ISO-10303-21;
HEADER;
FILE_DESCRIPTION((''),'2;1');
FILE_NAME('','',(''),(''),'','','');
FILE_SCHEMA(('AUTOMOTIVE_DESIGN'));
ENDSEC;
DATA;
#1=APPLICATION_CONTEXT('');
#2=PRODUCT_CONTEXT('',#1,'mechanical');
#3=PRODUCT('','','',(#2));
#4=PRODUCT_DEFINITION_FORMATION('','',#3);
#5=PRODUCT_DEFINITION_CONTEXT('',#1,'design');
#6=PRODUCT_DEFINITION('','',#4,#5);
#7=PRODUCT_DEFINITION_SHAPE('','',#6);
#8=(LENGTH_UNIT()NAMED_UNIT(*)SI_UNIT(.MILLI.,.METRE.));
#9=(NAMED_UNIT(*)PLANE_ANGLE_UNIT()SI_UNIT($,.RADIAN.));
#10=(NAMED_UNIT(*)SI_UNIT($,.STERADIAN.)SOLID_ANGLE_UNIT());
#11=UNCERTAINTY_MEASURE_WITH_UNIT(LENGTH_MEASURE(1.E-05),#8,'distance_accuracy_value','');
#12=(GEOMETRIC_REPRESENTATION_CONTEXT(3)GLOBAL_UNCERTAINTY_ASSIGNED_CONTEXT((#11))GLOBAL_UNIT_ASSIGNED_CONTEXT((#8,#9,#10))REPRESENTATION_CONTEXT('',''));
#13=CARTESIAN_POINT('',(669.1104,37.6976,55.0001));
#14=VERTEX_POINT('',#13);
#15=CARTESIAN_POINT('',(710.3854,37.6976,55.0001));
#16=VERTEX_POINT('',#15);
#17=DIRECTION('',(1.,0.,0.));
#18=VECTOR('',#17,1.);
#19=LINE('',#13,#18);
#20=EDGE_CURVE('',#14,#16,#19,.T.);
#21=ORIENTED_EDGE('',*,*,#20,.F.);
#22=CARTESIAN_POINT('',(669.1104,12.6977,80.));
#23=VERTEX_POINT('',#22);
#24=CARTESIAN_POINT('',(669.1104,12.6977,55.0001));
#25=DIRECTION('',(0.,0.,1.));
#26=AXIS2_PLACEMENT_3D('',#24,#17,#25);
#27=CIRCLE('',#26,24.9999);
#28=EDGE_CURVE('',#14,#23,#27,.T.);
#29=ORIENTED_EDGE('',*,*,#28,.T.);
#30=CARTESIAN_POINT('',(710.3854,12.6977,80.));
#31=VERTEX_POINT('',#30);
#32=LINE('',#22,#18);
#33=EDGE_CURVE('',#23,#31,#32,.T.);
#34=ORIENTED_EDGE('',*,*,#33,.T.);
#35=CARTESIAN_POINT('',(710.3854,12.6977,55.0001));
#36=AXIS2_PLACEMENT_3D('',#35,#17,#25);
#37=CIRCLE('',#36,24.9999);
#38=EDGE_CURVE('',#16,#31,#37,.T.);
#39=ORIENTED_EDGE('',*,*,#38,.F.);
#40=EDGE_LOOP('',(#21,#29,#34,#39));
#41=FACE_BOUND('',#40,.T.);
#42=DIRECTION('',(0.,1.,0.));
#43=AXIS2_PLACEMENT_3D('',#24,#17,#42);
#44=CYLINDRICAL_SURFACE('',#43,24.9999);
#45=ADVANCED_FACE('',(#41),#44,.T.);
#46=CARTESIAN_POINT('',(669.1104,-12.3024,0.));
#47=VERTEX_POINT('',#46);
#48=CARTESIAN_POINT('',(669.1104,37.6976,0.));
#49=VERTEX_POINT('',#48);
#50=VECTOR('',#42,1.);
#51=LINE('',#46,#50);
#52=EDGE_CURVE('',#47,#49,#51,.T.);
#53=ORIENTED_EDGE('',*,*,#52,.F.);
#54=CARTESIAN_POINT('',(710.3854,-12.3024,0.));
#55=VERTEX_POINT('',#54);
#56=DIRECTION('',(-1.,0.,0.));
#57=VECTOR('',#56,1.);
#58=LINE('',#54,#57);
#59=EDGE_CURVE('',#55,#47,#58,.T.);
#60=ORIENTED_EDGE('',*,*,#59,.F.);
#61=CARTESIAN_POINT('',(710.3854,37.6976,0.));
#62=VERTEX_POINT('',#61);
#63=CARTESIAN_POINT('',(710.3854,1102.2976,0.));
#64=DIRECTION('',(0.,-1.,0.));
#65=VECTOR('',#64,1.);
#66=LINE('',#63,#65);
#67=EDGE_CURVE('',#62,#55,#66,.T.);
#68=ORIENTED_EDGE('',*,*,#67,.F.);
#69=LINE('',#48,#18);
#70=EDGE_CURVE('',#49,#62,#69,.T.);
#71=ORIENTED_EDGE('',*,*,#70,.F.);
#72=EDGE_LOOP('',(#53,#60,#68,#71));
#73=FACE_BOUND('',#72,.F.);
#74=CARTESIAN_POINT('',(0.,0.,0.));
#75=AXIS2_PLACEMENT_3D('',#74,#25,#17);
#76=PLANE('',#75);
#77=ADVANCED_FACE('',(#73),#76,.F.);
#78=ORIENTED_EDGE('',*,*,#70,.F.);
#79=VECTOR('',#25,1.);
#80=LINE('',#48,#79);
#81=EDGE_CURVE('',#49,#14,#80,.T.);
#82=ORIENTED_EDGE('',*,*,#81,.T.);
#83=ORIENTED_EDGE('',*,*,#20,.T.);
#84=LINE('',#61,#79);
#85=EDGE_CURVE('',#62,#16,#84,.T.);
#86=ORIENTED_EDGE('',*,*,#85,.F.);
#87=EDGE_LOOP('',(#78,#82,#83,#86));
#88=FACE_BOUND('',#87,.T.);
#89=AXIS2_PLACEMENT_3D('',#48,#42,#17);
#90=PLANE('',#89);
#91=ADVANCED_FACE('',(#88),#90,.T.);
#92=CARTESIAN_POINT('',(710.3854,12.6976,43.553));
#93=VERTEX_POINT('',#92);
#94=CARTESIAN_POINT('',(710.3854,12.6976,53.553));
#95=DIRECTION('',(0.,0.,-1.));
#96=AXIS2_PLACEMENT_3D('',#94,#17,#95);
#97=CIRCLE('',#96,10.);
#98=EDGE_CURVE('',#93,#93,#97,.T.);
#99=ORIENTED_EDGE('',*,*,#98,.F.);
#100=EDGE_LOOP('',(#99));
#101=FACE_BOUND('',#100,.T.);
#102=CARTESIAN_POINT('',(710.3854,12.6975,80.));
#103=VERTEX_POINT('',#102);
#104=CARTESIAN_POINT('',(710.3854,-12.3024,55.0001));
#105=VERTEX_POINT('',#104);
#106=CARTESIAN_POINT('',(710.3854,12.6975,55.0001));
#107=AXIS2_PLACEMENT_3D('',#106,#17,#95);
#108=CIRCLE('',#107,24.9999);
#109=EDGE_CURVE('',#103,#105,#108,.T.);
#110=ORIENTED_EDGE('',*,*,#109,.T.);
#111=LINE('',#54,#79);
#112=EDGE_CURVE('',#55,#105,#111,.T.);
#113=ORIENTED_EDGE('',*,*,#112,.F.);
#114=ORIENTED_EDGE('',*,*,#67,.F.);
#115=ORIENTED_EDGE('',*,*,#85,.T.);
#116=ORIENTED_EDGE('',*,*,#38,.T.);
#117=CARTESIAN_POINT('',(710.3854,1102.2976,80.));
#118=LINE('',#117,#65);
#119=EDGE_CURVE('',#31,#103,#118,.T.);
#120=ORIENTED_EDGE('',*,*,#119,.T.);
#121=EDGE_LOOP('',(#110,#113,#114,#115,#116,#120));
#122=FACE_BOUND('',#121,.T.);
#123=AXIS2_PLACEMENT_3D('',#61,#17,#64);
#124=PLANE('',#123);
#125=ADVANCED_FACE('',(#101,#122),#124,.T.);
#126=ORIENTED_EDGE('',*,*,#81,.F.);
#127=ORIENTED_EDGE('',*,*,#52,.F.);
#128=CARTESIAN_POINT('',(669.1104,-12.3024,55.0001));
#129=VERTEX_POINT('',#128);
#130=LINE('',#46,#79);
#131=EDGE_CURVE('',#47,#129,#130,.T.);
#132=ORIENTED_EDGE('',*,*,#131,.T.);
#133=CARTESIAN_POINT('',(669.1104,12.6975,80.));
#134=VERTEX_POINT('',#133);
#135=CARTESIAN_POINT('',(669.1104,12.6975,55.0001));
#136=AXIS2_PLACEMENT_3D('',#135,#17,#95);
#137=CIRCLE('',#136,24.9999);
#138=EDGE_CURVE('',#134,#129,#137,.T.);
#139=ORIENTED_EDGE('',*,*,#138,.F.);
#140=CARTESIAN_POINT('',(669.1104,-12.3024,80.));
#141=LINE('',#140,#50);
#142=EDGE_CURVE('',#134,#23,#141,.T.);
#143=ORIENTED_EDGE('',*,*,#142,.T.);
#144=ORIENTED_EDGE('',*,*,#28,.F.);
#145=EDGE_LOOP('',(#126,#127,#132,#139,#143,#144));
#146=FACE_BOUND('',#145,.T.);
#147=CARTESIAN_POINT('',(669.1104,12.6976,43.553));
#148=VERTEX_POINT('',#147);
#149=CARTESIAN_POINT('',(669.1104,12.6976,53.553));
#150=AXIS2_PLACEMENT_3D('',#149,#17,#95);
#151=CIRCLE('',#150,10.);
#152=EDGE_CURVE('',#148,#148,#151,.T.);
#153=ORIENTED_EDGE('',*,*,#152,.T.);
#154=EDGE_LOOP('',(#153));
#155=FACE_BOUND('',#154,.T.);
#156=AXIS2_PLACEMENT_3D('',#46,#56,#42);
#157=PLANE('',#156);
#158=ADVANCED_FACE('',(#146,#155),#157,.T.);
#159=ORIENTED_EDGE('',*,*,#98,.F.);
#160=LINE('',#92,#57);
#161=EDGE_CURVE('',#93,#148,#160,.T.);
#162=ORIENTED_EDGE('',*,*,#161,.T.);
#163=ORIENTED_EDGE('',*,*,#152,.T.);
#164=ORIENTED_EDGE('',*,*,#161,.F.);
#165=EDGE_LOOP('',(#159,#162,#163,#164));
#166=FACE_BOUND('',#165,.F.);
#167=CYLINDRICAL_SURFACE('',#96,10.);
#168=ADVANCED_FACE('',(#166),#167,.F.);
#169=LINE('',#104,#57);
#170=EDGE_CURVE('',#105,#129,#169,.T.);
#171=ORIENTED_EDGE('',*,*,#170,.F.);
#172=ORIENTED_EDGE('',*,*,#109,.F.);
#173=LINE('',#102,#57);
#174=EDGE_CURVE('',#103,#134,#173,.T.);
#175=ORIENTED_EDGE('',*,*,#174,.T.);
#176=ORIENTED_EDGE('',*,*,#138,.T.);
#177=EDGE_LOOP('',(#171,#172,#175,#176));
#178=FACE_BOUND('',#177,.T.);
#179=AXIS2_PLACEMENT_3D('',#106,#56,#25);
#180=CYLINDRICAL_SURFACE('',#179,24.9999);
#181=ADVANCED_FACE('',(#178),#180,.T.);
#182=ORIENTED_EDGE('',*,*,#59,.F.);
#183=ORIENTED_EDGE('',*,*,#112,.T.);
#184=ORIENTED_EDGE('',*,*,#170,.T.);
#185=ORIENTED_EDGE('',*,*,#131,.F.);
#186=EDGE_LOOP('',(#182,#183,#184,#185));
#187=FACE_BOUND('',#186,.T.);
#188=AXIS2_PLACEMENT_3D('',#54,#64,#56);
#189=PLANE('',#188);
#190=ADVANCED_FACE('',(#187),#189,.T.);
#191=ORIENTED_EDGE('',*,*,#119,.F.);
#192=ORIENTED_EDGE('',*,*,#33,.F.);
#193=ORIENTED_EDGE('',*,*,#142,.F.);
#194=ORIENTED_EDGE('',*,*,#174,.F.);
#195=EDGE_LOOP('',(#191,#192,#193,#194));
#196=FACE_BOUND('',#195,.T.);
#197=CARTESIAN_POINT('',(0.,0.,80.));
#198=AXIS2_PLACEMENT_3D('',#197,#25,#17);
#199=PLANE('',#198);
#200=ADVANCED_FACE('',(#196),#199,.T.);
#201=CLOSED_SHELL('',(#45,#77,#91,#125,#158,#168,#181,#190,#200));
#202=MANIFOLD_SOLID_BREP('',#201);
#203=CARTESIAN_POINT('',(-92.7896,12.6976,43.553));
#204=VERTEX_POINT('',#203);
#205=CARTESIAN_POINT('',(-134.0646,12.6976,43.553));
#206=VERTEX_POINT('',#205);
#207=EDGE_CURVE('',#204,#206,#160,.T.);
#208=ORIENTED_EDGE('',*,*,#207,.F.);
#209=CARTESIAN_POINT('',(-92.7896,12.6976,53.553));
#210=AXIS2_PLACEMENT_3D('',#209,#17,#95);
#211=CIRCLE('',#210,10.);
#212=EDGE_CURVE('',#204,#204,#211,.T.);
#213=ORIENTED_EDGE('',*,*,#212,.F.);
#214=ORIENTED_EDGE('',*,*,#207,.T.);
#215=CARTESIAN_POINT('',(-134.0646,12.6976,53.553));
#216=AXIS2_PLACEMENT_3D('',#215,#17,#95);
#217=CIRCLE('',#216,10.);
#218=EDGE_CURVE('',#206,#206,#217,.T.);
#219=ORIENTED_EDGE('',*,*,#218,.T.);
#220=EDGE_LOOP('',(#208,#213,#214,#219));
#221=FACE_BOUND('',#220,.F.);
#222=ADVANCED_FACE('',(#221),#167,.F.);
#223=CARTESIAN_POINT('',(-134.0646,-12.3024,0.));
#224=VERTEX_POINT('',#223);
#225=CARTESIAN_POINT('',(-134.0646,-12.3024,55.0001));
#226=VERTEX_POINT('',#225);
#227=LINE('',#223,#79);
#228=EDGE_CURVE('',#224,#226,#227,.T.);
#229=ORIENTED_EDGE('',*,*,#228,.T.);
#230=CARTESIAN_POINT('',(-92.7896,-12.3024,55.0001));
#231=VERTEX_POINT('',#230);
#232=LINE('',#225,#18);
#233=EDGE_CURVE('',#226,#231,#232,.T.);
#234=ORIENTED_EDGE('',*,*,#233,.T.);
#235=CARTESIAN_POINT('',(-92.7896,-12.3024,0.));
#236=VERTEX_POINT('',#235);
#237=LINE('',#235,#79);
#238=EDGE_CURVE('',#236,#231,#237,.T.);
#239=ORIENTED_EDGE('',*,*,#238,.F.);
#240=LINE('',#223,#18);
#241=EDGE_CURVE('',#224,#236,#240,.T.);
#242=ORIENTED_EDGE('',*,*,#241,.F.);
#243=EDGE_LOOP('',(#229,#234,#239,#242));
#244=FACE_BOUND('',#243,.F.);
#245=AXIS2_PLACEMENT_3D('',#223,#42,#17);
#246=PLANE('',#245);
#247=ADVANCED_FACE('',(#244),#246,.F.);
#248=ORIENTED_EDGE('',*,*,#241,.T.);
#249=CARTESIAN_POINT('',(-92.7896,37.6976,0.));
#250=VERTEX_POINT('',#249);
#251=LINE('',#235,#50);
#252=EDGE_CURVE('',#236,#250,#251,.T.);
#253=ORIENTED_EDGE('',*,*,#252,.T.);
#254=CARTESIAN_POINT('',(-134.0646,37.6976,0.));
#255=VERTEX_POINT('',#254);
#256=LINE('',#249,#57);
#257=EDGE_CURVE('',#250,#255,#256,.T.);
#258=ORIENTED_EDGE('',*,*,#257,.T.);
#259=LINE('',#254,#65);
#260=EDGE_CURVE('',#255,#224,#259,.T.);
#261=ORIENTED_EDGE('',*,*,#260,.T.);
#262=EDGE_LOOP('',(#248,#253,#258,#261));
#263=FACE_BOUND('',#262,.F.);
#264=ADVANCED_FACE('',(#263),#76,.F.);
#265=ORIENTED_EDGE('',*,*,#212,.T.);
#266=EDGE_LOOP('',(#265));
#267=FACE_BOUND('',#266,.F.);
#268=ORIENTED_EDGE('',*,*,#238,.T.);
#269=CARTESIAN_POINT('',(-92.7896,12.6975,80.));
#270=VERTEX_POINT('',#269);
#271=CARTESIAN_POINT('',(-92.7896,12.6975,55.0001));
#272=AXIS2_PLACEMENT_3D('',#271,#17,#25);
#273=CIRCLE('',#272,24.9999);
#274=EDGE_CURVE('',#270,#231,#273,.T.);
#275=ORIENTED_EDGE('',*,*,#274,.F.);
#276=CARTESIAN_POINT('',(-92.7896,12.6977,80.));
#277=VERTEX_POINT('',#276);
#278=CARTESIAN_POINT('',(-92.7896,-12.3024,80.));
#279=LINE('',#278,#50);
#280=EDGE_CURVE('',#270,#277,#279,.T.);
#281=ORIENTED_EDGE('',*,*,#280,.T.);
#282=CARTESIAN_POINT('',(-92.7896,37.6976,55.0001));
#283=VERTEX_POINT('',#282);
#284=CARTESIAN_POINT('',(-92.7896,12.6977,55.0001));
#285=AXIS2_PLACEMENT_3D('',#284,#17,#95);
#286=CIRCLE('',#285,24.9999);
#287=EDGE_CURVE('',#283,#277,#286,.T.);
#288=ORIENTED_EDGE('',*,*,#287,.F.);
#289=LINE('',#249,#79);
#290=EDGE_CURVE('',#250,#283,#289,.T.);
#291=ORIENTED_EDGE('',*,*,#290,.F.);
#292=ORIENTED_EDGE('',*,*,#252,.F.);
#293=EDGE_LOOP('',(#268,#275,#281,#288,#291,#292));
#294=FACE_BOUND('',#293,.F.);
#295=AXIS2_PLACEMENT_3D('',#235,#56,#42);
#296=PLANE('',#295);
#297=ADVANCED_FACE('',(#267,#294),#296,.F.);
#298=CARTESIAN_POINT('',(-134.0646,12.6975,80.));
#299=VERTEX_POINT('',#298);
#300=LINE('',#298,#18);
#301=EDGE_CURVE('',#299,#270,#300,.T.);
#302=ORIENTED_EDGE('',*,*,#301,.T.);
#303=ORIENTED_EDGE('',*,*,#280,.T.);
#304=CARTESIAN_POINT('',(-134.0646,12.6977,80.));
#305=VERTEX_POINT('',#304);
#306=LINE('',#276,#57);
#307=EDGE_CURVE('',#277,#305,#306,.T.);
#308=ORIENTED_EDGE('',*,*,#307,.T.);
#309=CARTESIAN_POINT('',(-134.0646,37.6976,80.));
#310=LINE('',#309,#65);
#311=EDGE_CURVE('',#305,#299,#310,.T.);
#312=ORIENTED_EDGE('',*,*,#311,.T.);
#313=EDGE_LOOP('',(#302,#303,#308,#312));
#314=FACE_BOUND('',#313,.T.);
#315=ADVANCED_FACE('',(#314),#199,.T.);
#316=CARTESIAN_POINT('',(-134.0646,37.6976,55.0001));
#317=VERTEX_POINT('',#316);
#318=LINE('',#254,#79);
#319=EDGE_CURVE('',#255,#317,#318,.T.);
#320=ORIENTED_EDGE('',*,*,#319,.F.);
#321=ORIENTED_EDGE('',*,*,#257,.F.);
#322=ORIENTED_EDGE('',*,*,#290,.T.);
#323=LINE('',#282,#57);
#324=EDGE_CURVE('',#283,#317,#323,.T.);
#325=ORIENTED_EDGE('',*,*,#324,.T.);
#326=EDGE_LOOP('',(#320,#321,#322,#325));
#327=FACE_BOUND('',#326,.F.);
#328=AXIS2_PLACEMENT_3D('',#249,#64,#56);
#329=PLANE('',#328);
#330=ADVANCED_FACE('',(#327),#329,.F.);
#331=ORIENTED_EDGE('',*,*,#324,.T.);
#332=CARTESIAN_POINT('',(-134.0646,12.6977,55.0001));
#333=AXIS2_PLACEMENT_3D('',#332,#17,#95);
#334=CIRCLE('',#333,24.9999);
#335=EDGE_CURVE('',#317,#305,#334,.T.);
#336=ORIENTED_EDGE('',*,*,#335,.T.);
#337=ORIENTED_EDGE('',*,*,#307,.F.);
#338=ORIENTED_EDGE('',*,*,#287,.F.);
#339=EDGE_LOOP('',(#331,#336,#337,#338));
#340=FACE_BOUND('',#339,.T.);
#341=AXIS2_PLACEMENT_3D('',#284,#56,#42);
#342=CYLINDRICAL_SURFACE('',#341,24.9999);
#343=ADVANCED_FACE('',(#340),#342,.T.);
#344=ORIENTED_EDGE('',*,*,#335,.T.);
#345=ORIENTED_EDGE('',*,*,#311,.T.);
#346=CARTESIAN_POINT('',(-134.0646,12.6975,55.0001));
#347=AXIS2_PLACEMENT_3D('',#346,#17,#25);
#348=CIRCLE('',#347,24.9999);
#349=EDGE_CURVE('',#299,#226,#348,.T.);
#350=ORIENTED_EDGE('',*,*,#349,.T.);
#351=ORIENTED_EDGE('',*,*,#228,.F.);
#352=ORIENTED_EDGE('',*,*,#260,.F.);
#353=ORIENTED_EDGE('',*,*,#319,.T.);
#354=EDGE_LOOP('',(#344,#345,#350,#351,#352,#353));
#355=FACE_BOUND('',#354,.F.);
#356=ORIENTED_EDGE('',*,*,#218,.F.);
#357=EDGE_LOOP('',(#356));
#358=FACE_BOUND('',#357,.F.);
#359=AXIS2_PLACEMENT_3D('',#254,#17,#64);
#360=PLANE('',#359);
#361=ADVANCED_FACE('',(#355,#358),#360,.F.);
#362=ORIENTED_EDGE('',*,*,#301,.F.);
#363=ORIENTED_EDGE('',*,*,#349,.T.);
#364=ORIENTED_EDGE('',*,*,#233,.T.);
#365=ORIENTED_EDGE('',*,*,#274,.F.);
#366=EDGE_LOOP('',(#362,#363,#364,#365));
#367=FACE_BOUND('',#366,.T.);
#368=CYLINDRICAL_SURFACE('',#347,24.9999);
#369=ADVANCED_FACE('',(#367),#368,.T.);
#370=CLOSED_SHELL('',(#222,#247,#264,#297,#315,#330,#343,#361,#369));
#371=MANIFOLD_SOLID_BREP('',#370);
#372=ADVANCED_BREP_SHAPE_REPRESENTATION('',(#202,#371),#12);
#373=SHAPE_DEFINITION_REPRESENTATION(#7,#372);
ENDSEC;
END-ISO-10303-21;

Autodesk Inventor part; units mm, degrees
ref_plane "YZ Plane" through (0, 0, 0) normal (1, 0, 0) x (0, 1, 0)
ref_plane "XZ Plane" through (0, 0, 0) normal (0, 1, 0) x (-1, 0, 0)
ref_plane "XY Plane" through (0, 0, 0) normal (0, 0, 1) x (1, 0, 0)
ref_plane "Work Plane1" through (0, 0, 0) normal (0, 0, 1) x (1, 0, 0)
sketch "Sketch1" plane through (0, 0, 0) normal (0, 0, 1) x (1, 0, 0)
  line L0 (-134.0646, -12.3024) -> (-92.7896, -12.3024)
  line L1 (-92.7896, -12.3024) -> (-92.7896, 37.6976)
  line L2 (-92.7896, 37.6976) -> (-134.0646, 37.6976)
  line L3 (-134.0646, 37.6976) -> (-134.0646, -12.3024)
  line L4 (710.3854, 1102.2976) -> (710.3854, -142.1524) projected
  line L5 (707.2104, -138.9774) -> (-130.8896, -138.9774) projected
  line L6 (288.1604, -138.9774) -> (288.1604, 728.5141) construction
  line L7 (710.3854, -12.3024) -> (669.1104, -12.3024)
  line L8 (669.1104, -12.3024) -> (669.1104, 37.6976)
  line L9 (669.1104, 37.6976) -> (710.3854, 37.6976)
  line L10 (710.3854, 37.6976) -> (710.3854, -12.3024)
  point P0 (0, 0)
extrude "Extrusion1" add sketch "Sketch1" along normal blind 80
sketch "Sketch2" plane through (710.3854, -12.3024, 0) normal (1, 0, 0) x (0, 0, -1)
  circle A0 centre (-53.553, 25) radius 10
  line L0 (0, 50) -> (-80, 50) projected
  point P0 (0, 12.3024)
  dimension "d2" = 25
  dimension "d3" = 20
extrude "Extrusion2" cut sketch "Sketch2" against normal through all
fillet "Fillet1" radius 25 4 edges at (689.7479, -12.3024, 80) (689.7479, 37.6976, 80) (-113.4271, -12.3024, 80) (-113.4271, 37.6976, 80)
properties part number "BEVEL_SHAFT"
